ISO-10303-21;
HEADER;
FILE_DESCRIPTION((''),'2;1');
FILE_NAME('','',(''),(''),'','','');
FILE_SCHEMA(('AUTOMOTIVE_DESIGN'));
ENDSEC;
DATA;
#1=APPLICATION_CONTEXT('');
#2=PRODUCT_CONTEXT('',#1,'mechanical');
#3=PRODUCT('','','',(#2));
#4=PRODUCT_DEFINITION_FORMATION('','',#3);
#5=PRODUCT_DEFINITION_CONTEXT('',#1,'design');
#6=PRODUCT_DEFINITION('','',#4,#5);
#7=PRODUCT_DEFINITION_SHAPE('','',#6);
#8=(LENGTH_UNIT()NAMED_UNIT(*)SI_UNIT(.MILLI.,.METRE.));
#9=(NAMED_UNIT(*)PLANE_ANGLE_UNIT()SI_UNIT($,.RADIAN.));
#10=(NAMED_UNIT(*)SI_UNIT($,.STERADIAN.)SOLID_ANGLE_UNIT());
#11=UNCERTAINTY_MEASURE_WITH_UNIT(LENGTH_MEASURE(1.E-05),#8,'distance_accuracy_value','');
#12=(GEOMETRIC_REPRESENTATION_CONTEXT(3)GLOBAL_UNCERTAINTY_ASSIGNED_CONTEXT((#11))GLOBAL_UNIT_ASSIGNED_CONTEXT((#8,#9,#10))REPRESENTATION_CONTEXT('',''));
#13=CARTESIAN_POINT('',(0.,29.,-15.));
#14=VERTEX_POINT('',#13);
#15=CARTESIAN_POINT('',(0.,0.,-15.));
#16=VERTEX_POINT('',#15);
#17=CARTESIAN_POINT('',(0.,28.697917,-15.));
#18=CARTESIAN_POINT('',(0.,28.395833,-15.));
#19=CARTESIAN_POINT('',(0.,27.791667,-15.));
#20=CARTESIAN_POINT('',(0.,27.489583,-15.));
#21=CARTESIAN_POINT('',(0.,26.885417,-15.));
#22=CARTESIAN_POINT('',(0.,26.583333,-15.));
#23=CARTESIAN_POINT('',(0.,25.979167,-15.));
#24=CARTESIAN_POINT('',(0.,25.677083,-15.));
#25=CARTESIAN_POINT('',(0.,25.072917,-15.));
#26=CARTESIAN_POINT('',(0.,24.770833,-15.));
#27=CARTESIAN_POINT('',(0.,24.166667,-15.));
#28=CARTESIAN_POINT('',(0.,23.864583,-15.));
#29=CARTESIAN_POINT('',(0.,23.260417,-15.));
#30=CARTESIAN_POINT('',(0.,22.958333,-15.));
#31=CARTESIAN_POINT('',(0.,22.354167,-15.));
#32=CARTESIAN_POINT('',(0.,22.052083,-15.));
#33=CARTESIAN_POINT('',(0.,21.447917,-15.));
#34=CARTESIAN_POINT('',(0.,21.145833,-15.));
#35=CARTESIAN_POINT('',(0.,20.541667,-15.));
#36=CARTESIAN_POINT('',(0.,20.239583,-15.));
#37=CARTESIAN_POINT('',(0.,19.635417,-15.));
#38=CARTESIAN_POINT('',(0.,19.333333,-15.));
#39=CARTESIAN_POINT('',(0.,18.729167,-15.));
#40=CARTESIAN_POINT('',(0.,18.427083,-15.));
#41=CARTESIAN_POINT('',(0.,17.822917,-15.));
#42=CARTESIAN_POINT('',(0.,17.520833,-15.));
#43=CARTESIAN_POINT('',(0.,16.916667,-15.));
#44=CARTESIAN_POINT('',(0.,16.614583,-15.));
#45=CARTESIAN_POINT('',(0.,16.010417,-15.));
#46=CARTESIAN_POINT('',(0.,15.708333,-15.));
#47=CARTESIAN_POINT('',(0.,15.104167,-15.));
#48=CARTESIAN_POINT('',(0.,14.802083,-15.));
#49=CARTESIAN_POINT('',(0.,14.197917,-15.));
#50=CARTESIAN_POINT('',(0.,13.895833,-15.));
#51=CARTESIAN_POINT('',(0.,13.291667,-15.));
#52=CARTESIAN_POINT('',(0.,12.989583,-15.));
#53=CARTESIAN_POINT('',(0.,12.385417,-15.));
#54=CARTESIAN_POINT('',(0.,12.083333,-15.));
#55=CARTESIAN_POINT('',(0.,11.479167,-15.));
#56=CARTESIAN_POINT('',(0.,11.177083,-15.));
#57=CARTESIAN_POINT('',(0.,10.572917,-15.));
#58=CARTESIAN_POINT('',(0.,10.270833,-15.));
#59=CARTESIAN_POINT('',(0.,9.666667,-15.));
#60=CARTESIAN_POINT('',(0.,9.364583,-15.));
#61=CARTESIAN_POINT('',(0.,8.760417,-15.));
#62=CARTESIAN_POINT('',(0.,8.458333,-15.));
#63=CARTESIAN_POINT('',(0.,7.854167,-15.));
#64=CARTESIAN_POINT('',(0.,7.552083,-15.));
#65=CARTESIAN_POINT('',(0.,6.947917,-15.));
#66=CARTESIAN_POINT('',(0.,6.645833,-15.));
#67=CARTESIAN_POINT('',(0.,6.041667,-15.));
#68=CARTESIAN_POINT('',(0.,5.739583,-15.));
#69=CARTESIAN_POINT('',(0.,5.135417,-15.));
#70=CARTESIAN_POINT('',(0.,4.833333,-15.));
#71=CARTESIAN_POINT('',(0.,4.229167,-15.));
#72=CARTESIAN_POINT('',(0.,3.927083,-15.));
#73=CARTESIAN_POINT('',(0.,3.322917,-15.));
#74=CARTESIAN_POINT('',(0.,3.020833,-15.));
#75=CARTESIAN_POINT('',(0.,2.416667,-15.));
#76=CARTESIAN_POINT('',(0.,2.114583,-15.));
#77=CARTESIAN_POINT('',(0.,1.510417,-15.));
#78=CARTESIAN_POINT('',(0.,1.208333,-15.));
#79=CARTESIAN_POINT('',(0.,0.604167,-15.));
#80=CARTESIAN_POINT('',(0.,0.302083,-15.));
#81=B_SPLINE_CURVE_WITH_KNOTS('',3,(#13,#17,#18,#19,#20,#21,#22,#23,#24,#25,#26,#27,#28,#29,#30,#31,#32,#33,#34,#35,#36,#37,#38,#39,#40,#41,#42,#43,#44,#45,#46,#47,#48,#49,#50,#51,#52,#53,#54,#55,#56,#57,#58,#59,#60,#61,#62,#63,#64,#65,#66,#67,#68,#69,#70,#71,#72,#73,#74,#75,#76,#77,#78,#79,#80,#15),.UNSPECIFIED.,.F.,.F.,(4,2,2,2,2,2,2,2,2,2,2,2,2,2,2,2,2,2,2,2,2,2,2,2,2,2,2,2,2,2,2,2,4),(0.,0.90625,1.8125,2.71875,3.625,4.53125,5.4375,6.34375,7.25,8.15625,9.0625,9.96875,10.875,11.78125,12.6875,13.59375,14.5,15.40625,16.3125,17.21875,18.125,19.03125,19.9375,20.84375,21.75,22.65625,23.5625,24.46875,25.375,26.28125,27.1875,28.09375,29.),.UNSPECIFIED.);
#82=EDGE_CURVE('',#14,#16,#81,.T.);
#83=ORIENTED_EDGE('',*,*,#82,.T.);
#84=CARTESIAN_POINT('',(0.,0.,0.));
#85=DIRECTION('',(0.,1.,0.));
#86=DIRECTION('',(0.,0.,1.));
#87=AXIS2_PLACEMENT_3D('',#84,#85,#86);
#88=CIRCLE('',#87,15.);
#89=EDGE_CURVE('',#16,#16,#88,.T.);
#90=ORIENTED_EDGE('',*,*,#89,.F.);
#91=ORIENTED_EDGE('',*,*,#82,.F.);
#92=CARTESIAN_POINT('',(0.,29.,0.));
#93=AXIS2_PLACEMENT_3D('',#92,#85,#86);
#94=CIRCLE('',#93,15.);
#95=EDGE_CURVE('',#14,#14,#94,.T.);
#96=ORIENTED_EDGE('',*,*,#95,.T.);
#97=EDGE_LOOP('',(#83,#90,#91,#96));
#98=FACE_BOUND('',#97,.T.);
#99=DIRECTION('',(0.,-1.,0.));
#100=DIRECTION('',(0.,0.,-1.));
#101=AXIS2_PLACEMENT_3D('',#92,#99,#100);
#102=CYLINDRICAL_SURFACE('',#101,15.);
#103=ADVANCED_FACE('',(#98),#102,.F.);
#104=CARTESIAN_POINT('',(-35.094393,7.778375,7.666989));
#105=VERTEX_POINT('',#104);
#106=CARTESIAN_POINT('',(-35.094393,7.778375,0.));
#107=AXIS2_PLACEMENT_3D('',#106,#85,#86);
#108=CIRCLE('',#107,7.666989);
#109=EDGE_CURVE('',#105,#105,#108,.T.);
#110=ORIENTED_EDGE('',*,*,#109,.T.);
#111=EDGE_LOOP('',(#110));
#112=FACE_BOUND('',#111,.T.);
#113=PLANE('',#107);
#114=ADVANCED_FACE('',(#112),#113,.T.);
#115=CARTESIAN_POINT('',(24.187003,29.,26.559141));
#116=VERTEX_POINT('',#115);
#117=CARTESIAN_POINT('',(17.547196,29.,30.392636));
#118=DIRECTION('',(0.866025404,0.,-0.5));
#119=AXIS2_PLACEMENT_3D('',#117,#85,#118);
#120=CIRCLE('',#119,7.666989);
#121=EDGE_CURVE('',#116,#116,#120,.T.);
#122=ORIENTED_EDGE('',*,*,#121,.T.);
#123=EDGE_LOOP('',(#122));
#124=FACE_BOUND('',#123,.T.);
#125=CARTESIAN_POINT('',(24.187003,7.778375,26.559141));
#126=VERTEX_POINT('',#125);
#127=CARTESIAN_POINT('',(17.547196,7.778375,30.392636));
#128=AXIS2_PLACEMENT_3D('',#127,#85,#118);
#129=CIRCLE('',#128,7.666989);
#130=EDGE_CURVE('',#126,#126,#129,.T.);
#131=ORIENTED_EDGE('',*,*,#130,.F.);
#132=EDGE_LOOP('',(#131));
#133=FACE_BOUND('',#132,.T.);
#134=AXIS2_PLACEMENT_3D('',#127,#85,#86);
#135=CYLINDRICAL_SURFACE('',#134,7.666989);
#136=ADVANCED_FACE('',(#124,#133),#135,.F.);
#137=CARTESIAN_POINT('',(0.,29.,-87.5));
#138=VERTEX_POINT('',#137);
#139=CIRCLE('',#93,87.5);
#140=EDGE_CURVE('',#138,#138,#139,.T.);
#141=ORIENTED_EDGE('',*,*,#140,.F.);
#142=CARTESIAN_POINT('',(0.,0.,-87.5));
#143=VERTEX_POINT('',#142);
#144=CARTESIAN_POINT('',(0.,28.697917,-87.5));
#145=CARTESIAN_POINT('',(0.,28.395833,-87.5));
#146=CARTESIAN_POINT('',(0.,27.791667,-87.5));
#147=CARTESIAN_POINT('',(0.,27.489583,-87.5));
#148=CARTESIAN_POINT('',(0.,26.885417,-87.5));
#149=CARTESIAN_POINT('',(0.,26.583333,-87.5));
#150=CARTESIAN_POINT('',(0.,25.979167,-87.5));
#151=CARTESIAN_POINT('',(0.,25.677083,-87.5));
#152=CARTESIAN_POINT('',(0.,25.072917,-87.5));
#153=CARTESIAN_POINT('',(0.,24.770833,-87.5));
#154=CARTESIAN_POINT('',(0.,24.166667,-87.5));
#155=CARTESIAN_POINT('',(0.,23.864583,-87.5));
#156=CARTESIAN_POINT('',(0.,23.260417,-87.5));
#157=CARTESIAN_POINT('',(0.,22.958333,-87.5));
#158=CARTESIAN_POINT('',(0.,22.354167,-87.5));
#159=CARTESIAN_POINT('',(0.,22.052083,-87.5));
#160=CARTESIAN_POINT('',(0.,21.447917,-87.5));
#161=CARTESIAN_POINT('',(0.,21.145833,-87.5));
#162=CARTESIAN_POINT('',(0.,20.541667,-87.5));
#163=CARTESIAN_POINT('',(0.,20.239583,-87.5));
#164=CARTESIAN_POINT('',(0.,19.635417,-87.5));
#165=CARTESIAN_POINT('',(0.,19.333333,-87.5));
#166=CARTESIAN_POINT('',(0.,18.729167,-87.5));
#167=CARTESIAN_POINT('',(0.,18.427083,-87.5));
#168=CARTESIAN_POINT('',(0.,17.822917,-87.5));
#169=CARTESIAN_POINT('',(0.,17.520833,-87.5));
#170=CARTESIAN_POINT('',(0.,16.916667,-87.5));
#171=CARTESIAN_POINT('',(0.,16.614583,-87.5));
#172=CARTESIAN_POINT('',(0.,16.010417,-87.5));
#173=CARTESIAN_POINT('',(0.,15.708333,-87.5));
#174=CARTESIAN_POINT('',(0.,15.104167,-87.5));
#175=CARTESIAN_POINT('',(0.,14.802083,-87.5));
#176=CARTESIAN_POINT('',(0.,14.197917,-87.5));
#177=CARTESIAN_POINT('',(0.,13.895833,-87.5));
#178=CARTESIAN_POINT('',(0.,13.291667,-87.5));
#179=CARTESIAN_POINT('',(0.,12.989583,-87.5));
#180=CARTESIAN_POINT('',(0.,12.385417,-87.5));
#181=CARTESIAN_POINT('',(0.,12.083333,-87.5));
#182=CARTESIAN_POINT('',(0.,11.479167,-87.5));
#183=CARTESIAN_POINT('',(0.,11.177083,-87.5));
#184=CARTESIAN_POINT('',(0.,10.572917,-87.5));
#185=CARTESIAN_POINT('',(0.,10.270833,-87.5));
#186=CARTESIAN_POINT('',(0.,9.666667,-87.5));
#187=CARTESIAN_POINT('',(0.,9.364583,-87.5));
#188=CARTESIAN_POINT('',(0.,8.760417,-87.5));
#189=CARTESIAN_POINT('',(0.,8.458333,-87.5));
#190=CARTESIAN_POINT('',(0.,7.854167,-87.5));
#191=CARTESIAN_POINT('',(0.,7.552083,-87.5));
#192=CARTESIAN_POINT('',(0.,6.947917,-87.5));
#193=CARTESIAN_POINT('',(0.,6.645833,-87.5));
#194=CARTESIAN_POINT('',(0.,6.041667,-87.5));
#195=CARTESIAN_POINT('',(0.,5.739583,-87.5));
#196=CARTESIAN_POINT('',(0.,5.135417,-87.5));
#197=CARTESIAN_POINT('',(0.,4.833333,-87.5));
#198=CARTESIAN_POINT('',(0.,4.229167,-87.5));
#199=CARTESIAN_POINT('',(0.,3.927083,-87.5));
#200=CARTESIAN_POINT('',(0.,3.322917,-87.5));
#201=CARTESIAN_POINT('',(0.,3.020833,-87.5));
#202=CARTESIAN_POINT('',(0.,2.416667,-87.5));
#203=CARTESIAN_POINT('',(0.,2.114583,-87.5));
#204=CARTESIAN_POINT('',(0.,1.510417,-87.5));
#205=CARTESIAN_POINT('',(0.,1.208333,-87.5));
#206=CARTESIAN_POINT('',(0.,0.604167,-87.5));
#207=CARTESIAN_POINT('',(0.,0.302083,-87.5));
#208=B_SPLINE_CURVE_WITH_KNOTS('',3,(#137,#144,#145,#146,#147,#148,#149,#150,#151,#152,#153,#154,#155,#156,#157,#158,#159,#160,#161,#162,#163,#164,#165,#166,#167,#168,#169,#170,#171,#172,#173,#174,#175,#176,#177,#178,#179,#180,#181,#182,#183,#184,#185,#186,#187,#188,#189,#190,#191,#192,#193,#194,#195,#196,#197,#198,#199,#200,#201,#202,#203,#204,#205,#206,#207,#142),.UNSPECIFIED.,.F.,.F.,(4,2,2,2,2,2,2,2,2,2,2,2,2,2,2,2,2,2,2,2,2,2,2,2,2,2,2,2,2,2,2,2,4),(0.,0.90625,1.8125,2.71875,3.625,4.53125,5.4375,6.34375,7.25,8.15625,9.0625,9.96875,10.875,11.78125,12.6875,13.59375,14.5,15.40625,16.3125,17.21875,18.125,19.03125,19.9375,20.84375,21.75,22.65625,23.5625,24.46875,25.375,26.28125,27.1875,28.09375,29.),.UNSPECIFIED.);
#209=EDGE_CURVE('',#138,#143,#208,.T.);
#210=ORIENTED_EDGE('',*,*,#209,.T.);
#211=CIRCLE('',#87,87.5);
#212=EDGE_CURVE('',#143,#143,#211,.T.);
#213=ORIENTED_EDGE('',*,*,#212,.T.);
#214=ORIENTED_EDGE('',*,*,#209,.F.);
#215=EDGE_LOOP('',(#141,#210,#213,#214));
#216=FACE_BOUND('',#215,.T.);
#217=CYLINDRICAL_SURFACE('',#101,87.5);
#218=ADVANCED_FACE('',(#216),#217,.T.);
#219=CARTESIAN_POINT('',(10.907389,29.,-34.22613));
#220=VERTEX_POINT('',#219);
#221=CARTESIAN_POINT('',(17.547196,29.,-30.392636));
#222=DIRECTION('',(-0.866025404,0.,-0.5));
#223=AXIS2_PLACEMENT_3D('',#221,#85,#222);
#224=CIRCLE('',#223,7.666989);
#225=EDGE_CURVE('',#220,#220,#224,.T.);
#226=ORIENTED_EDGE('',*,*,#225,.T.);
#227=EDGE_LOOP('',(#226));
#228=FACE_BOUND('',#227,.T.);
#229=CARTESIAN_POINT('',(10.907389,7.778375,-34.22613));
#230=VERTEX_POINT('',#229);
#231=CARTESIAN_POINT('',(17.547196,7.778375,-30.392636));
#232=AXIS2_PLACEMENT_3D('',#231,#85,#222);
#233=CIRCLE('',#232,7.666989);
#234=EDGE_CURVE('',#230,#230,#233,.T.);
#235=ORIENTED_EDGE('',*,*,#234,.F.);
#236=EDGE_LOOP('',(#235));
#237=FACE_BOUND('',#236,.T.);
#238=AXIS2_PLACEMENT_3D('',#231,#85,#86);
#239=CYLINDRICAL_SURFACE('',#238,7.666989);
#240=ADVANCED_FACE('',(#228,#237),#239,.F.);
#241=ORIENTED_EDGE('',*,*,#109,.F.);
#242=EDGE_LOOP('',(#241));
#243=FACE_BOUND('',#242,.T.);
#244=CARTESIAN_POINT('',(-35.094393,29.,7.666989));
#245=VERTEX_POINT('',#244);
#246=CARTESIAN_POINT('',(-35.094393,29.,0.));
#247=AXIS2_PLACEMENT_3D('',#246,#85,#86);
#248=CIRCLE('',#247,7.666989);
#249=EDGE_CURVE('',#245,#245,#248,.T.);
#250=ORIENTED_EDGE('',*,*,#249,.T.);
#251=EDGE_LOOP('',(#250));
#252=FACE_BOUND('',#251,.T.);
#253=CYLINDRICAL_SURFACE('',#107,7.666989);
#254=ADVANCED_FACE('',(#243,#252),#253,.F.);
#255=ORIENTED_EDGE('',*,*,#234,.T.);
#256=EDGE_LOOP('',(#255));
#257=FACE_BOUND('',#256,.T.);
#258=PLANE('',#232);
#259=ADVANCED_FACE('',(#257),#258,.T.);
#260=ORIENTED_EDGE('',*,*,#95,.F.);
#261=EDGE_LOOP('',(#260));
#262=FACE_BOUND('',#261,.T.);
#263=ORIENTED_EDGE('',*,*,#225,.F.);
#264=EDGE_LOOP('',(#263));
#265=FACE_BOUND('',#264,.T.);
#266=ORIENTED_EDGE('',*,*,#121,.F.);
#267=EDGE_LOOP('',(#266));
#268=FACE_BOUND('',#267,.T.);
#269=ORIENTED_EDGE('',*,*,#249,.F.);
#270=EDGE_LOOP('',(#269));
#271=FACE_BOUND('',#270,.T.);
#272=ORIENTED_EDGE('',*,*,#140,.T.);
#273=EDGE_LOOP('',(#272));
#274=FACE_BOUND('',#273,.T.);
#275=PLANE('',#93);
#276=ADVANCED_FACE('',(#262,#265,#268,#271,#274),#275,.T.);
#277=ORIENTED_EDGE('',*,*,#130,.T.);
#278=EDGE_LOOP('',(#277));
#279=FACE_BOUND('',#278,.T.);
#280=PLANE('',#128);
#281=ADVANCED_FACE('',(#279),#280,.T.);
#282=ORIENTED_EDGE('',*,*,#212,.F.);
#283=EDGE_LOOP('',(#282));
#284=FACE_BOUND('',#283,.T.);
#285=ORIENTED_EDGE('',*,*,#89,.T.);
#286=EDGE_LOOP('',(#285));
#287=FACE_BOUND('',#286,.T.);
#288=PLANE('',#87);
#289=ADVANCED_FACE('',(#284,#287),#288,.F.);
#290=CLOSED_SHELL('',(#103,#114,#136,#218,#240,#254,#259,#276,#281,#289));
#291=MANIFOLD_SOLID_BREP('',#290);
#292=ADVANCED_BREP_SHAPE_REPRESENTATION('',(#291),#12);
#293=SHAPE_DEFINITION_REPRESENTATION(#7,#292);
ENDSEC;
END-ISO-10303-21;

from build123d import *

# Parameters (mm, degrees)
SKETCH1_R           = 87.5
BOSS_EXTRUDE1_DEPTH = 29
SKETCH2_R           = 15
CUT_EXTRUDE1_DEPTH  = 128.096420091
SKETCH3_R           = 7.666988893
CUT_EXTRUDE2_DEPTH  = 21.221624825
CIRPATTERN1_COUNT   = 3


with BuildPart() as part:
    # Sketch1 → Boss-Extrude1 (new body)
    with BuildSketch(Plane(origin=(0, 0, 0), x_dir=(1, 0, 0), z_dir=(0, 1, 0))):
        Circle(SKETCH1_R)
    extrude(amount=BOSS_EXTRUDE1_DEPTH)

    # Sketch2 → Cut-Extrude1 (cut, through all)
    with BuildSketch(Plane(origin=(0, 0, 0), x_dir=(1, 0, 0), z_dir=(0, 1, 0))):
        Circle(SKETCH2_R)
    extrude(amount=CUT_EXTRUDE1_DEPTH, mode=Mode.SUBTRACT)

    # Sketch3 → Cut-Extrude2 (cut)
    with BuildSketch(Plane(origin=(0, 29, 0), x_dir=(1, 0, 0), z_dir=(0, 1, 0))):
        with Locations((-35.094392614, 0)):
            Circle(SKETCH3_R)
    cut_extrude2 = extrude(amount=-CUT_EXTRUDE2_DEPTH, mode=Mode.SUBTRACT)

    # CirPattern1: Cut-Extrude2 ×3 about axis
    cirpattern1_axis = Axis((0, 0, 0), (0, 1, 0))
    for i in range(1, CIRPATTERN1_COUNT):
        add(cut_extrude2.rotate(cirpattern1_axis, i * 360 / CIRPATTERN1_COUNT), mode=Mode.SUBTRACT)


solid = part.part
